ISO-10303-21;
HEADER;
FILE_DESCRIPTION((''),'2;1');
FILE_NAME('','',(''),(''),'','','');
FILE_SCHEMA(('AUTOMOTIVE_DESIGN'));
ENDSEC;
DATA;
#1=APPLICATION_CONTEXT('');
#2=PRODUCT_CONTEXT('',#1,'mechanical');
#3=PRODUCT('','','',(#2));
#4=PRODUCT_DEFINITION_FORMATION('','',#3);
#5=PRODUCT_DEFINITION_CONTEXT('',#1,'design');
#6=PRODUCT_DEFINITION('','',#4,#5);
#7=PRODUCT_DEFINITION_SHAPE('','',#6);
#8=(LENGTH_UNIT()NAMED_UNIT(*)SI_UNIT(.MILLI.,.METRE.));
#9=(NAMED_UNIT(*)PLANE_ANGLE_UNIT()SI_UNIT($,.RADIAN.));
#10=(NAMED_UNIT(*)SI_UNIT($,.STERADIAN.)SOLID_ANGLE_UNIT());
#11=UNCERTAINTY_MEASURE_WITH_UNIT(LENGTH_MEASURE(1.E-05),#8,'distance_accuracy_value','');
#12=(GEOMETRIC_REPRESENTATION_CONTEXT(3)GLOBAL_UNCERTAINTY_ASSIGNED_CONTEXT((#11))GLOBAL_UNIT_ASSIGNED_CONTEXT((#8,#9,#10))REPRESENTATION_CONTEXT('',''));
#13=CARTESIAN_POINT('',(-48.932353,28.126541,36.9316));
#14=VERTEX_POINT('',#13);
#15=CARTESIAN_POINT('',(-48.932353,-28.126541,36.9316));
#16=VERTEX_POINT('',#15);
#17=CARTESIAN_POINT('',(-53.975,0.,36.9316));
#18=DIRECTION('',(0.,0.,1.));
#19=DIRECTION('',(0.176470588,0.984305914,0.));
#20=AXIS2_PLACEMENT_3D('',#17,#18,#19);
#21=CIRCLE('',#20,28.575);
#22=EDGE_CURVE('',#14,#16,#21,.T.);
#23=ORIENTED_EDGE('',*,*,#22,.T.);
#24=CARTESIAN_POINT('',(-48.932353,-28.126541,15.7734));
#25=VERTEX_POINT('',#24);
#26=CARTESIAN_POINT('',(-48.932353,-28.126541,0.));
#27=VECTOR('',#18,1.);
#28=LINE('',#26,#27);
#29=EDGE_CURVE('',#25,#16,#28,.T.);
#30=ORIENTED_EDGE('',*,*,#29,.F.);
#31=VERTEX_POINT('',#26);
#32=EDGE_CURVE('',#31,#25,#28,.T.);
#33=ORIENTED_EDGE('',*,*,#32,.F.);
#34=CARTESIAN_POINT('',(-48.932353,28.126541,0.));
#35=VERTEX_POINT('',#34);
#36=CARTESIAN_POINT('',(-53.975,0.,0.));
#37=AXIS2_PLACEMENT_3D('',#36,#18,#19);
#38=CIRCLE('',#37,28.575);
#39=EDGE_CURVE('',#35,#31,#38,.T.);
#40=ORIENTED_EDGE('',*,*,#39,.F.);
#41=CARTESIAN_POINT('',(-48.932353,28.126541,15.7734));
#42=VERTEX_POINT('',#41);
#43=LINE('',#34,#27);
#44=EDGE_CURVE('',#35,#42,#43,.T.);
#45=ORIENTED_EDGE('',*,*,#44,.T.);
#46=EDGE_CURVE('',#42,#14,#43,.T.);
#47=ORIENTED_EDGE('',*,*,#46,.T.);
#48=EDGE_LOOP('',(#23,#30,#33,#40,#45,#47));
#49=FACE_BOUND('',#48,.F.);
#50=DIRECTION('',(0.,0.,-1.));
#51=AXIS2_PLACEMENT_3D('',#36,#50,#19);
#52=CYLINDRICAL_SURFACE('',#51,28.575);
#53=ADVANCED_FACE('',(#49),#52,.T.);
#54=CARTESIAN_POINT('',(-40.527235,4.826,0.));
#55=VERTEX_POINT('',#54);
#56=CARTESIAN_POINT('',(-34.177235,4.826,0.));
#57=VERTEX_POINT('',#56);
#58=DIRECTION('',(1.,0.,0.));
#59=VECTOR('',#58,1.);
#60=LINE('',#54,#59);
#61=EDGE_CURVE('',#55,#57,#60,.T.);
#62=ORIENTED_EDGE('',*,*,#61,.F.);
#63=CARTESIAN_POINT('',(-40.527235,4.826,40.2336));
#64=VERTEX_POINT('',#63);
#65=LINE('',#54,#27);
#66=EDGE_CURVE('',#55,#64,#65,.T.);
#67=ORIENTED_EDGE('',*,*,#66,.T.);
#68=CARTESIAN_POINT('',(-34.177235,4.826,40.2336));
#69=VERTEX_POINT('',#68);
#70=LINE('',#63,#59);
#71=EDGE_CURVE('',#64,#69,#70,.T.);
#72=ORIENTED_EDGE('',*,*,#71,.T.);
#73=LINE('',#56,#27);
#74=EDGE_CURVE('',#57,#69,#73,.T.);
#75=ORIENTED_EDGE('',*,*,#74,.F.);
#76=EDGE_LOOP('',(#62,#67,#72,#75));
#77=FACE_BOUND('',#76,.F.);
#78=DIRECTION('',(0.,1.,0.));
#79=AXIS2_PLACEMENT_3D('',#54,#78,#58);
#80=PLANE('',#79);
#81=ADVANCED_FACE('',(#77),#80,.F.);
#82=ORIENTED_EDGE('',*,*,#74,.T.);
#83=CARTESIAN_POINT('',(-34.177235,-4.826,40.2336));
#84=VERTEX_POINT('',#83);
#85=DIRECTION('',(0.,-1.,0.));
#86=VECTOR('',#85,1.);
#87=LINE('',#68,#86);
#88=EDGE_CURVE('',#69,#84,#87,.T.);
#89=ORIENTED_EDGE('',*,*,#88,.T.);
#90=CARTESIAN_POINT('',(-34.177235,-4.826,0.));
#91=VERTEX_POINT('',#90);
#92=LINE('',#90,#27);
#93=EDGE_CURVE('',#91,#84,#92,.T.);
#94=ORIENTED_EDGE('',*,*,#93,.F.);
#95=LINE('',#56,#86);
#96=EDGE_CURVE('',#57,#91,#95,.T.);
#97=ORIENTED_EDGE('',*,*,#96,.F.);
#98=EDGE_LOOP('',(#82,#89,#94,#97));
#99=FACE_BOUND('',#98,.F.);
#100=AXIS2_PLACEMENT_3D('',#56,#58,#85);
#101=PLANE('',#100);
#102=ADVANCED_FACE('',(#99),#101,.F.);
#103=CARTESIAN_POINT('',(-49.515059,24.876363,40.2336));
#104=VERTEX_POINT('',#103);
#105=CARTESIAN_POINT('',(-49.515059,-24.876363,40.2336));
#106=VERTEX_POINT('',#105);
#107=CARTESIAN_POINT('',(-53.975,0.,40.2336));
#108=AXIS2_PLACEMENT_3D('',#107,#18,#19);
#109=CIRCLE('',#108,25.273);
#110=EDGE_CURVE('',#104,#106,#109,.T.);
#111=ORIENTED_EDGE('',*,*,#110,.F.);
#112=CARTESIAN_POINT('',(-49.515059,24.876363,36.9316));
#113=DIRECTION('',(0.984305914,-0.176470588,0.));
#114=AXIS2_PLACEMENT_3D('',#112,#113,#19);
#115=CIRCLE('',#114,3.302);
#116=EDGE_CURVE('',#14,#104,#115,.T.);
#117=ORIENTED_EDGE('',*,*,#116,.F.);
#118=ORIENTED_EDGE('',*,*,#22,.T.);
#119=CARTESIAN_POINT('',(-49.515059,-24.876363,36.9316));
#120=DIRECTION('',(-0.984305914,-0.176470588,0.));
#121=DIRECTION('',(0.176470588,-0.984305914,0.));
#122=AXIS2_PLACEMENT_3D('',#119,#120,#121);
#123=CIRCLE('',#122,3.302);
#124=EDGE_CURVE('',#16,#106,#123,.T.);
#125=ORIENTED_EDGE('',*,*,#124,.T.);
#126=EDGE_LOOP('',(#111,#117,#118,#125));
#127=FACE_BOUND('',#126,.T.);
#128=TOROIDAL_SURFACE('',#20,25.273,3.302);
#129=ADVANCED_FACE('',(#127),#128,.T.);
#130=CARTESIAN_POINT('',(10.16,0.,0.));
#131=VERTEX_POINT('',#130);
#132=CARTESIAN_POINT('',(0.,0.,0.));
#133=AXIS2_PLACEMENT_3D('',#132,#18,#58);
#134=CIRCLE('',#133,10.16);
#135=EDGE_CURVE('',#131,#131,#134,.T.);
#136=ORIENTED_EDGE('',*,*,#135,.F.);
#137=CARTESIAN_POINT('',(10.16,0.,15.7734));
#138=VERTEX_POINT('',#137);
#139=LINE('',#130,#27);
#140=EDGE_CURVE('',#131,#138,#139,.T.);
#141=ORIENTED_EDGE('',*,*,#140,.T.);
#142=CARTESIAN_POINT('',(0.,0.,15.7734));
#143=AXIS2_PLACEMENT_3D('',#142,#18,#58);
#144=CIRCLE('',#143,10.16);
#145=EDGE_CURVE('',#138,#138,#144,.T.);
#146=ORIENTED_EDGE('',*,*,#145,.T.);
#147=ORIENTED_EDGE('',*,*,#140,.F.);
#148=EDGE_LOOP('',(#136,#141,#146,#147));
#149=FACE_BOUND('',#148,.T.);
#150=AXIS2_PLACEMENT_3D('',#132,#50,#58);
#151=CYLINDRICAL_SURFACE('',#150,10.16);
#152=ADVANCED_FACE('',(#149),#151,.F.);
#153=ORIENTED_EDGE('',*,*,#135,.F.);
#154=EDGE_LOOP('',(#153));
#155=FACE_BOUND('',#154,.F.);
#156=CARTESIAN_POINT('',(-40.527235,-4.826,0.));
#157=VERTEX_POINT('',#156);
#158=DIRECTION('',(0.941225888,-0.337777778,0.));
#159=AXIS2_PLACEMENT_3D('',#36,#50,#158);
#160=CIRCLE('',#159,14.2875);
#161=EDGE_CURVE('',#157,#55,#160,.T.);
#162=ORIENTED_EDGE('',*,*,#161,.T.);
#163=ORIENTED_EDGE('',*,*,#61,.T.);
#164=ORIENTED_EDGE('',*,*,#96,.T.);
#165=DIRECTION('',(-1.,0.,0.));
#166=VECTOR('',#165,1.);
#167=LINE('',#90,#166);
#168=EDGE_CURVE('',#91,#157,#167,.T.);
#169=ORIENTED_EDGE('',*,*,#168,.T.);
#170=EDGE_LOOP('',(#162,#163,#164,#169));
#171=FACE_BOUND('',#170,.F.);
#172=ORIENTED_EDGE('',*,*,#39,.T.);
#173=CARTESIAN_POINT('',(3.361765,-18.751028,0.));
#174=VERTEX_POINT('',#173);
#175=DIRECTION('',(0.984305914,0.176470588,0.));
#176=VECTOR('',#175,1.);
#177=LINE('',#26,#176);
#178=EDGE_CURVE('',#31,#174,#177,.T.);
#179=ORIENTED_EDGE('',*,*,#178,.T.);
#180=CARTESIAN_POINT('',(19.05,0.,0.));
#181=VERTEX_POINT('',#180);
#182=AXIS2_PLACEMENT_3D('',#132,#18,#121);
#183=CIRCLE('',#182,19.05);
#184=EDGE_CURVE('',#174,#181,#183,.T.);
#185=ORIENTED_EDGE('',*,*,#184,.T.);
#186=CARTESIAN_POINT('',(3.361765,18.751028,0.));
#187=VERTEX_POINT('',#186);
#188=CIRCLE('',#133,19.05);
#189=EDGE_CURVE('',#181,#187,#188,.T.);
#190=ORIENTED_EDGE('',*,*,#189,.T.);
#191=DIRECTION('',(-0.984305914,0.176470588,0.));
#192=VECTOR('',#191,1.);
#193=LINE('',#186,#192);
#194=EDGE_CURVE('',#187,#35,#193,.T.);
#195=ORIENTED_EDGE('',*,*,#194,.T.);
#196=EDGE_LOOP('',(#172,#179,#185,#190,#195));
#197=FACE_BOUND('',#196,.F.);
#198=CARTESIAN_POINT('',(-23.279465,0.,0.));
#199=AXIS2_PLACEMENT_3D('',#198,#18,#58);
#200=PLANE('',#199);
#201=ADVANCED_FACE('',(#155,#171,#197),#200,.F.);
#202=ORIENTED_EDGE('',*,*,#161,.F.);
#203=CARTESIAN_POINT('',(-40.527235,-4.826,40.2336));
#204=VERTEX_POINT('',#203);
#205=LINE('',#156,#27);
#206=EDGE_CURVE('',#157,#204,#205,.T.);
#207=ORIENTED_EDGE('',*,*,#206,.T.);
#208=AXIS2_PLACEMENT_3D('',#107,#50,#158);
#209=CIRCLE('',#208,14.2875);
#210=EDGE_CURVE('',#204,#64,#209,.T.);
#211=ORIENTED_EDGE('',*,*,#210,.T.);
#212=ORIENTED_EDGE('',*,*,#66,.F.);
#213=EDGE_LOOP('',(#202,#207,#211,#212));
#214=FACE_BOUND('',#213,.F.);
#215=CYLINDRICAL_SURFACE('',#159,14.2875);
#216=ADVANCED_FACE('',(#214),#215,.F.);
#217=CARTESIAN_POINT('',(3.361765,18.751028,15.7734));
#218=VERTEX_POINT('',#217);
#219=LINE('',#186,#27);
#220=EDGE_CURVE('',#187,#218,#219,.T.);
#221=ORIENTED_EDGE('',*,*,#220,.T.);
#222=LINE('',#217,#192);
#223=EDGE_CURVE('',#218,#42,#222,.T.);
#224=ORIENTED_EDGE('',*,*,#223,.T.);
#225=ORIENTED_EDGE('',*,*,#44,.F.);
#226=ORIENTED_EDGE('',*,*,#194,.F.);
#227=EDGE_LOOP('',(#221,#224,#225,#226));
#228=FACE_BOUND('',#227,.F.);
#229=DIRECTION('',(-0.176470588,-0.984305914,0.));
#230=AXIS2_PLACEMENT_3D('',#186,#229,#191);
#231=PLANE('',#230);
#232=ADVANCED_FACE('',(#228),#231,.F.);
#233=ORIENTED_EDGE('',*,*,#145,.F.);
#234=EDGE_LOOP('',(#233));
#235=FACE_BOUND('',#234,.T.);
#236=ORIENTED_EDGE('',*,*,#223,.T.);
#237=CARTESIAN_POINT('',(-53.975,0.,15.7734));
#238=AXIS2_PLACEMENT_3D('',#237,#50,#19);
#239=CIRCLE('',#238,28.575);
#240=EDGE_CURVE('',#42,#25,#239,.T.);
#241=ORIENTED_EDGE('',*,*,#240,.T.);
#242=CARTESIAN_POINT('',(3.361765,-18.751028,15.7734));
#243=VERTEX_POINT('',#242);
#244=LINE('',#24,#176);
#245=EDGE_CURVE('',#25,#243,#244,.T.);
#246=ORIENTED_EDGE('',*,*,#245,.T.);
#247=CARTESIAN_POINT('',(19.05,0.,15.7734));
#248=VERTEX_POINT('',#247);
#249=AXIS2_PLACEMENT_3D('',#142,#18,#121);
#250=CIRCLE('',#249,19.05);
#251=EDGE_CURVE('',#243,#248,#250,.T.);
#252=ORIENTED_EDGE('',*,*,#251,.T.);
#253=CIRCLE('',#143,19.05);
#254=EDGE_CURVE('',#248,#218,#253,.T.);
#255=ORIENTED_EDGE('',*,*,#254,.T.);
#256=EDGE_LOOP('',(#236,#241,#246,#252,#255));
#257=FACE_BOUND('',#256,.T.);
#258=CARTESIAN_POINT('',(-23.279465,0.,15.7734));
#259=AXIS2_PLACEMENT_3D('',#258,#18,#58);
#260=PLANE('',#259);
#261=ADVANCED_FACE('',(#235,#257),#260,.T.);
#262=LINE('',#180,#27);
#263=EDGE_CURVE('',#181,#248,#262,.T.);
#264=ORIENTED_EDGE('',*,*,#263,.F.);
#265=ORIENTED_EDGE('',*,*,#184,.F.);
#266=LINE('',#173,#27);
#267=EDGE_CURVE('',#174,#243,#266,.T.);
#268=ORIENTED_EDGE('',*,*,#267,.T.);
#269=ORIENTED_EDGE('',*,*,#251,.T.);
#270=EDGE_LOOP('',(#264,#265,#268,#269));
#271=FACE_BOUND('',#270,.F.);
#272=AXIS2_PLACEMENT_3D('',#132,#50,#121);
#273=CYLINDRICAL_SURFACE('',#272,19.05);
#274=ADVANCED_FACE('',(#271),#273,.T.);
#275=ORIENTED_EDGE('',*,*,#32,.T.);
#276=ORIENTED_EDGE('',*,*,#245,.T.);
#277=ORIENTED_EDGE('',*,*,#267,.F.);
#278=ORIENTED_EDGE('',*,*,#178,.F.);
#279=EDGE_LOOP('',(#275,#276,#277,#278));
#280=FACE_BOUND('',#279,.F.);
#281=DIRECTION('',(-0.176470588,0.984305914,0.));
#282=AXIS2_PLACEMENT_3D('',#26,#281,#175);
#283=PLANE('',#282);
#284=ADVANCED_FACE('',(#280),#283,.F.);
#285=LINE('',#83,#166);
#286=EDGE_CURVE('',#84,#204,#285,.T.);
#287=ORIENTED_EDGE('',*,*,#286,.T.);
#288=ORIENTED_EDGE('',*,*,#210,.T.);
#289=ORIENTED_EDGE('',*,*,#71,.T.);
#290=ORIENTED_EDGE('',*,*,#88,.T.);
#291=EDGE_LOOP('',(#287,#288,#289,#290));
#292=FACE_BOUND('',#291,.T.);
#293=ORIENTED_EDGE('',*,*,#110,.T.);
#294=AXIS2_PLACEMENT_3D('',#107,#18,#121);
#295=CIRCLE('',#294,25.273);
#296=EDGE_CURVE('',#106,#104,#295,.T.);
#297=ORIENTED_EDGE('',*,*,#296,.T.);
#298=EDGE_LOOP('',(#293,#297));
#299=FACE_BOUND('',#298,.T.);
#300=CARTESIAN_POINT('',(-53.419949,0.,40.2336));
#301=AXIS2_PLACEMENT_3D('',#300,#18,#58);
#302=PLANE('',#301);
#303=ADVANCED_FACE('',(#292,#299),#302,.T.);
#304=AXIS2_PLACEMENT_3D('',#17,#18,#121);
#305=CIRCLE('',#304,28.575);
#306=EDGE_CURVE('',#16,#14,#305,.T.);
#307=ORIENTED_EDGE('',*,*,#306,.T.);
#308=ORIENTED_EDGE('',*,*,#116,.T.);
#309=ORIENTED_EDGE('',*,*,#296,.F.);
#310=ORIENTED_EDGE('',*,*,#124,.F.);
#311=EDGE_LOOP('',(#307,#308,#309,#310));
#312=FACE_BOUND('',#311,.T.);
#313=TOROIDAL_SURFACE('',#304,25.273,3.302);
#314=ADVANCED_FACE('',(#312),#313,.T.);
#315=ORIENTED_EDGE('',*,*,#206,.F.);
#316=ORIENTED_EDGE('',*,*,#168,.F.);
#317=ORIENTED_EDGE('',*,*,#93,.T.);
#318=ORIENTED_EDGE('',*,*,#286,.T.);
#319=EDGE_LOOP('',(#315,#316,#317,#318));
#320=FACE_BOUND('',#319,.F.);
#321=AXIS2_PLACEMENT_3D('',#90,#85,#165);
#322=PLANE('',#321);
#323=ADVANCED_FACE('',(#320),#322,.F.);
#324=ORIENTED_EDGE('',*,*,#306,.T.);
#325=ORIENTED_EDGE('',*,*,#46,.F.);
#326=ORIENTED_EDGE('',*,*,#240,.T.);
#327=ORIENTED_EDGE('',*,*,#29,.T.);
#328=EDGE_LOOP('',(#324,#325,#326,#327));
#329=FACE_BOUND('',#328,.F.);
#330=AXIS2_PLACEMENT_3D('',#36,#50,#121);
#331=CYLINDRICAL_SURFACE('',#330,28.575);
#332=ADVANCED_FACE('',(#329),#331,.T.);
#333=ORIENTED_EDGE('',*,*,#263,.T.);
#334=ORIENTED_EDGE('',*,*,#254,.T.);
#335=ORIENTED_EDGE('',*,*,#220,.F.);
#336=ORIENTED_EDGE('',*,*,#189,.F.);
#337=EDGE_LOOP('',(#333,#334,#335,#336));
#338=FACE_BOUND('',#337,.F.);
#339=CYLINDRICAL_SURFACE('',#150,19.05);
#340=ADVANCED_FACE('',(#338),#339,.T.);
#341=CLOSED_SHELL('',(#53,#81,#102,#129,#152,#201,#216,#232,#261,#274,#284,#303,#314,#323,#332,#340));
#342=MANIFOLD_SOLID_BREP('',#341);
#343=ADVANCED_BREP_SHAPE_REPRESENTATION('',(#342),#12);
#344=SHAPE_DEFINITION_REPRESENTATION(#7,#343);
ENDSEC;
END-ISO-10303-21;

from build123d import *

# Parameters (mm, degrees)
F1_DEPTH = 40.2336
F0_R     = 10.16
F2_DEPTH = 15.7734
F3_R     = 3.302


# Not quite as in the source:
# - a feature names something its author has since deleted; it is built from what else it names


with BuildPart() as f1:
    # F0 (on Top) → F1 (new body)
    with BuildSketch(Plane.XY):
        with BuildLine():
            ThreePointArc((-48.9323529412, -28.1265414802), (-32.0589754437, -18.3362616868), (-25.4, 0))
            ThreePointArc((-25.4, 0), (-32.0589754437, 18.3362616868), (-48.9323529412, 28.1265414802))
            ThreePointArc((-48.9323529412, 28.1265414802), (-82.55, 0), (-48.9323529412, -28.1265414802))
        make_face()
        with BuildLine():
            ThreePointArc((-40.5272351207, -4.826), (-68.2625, 0), (-40.5272351207, 4.826))
            Line((-40.5272351207, 4.826), (-34.1772351207, 4.826))
            Line((-34.1772351207, 4.826), (-34.1772351207, -4.826))
            Line((-34.1772351207, -4.826), (-40.5272351207, -4.826))
        make_face(mode=Mode.SUBTRACT)
    extrude(amount=F1_DEPTH)

    # F0 (on Top) → F2 (join)
    with BuildSketch(Plane.XY):
        with BuildLine():
            ThreePointArc((-48.9323529412, 28.1265414802), (-32.0589754437, 18.3362616868), (-25.4, 0))
            ThreePointArc((-25.4, 0), (-32.0589754437, -18.3362616868), (-48.9323529412, -28.1265414802))
            Line((-48.9323529412, -28.1265414802), (3.3617647059, -18.7510276535))
            ThreePointArc((3.3617647059, -18.7510276535), (-19.05, 0), (3.3617647059, 18.7510276535))
            Line((3.3617647059, 18.7510276535), (-48.9323529412, 28.1265414802))
        make_face()
        with BuildLine():
            ThreePointArc((19.05, 0), (14.6106830375, 12.2241744579), (3.3617647059, 18.7510276535))
            ThreePointArc((3.3617647059, 18.7510276535), (-19.05, 0), (3.3617647059, -18.7510276535))
            ThreePointArc((3.3617647059, -18.7510276535), (14.6106830375, -12.2241744579), (19.05, 0))
        make_face()
        Circle(F0_R, mode=Mode.SUBTRACT)
    extrude(amount=F2_DEPTH)

    # F3
    f3_edges = [f1.edges().sort_by_distance(p)[0] for p in [
        (-59.017647, 28.126541, 40.2336),
    ]]
    fillet(f3_edges, radius=F3_R)


solid = f1.part
